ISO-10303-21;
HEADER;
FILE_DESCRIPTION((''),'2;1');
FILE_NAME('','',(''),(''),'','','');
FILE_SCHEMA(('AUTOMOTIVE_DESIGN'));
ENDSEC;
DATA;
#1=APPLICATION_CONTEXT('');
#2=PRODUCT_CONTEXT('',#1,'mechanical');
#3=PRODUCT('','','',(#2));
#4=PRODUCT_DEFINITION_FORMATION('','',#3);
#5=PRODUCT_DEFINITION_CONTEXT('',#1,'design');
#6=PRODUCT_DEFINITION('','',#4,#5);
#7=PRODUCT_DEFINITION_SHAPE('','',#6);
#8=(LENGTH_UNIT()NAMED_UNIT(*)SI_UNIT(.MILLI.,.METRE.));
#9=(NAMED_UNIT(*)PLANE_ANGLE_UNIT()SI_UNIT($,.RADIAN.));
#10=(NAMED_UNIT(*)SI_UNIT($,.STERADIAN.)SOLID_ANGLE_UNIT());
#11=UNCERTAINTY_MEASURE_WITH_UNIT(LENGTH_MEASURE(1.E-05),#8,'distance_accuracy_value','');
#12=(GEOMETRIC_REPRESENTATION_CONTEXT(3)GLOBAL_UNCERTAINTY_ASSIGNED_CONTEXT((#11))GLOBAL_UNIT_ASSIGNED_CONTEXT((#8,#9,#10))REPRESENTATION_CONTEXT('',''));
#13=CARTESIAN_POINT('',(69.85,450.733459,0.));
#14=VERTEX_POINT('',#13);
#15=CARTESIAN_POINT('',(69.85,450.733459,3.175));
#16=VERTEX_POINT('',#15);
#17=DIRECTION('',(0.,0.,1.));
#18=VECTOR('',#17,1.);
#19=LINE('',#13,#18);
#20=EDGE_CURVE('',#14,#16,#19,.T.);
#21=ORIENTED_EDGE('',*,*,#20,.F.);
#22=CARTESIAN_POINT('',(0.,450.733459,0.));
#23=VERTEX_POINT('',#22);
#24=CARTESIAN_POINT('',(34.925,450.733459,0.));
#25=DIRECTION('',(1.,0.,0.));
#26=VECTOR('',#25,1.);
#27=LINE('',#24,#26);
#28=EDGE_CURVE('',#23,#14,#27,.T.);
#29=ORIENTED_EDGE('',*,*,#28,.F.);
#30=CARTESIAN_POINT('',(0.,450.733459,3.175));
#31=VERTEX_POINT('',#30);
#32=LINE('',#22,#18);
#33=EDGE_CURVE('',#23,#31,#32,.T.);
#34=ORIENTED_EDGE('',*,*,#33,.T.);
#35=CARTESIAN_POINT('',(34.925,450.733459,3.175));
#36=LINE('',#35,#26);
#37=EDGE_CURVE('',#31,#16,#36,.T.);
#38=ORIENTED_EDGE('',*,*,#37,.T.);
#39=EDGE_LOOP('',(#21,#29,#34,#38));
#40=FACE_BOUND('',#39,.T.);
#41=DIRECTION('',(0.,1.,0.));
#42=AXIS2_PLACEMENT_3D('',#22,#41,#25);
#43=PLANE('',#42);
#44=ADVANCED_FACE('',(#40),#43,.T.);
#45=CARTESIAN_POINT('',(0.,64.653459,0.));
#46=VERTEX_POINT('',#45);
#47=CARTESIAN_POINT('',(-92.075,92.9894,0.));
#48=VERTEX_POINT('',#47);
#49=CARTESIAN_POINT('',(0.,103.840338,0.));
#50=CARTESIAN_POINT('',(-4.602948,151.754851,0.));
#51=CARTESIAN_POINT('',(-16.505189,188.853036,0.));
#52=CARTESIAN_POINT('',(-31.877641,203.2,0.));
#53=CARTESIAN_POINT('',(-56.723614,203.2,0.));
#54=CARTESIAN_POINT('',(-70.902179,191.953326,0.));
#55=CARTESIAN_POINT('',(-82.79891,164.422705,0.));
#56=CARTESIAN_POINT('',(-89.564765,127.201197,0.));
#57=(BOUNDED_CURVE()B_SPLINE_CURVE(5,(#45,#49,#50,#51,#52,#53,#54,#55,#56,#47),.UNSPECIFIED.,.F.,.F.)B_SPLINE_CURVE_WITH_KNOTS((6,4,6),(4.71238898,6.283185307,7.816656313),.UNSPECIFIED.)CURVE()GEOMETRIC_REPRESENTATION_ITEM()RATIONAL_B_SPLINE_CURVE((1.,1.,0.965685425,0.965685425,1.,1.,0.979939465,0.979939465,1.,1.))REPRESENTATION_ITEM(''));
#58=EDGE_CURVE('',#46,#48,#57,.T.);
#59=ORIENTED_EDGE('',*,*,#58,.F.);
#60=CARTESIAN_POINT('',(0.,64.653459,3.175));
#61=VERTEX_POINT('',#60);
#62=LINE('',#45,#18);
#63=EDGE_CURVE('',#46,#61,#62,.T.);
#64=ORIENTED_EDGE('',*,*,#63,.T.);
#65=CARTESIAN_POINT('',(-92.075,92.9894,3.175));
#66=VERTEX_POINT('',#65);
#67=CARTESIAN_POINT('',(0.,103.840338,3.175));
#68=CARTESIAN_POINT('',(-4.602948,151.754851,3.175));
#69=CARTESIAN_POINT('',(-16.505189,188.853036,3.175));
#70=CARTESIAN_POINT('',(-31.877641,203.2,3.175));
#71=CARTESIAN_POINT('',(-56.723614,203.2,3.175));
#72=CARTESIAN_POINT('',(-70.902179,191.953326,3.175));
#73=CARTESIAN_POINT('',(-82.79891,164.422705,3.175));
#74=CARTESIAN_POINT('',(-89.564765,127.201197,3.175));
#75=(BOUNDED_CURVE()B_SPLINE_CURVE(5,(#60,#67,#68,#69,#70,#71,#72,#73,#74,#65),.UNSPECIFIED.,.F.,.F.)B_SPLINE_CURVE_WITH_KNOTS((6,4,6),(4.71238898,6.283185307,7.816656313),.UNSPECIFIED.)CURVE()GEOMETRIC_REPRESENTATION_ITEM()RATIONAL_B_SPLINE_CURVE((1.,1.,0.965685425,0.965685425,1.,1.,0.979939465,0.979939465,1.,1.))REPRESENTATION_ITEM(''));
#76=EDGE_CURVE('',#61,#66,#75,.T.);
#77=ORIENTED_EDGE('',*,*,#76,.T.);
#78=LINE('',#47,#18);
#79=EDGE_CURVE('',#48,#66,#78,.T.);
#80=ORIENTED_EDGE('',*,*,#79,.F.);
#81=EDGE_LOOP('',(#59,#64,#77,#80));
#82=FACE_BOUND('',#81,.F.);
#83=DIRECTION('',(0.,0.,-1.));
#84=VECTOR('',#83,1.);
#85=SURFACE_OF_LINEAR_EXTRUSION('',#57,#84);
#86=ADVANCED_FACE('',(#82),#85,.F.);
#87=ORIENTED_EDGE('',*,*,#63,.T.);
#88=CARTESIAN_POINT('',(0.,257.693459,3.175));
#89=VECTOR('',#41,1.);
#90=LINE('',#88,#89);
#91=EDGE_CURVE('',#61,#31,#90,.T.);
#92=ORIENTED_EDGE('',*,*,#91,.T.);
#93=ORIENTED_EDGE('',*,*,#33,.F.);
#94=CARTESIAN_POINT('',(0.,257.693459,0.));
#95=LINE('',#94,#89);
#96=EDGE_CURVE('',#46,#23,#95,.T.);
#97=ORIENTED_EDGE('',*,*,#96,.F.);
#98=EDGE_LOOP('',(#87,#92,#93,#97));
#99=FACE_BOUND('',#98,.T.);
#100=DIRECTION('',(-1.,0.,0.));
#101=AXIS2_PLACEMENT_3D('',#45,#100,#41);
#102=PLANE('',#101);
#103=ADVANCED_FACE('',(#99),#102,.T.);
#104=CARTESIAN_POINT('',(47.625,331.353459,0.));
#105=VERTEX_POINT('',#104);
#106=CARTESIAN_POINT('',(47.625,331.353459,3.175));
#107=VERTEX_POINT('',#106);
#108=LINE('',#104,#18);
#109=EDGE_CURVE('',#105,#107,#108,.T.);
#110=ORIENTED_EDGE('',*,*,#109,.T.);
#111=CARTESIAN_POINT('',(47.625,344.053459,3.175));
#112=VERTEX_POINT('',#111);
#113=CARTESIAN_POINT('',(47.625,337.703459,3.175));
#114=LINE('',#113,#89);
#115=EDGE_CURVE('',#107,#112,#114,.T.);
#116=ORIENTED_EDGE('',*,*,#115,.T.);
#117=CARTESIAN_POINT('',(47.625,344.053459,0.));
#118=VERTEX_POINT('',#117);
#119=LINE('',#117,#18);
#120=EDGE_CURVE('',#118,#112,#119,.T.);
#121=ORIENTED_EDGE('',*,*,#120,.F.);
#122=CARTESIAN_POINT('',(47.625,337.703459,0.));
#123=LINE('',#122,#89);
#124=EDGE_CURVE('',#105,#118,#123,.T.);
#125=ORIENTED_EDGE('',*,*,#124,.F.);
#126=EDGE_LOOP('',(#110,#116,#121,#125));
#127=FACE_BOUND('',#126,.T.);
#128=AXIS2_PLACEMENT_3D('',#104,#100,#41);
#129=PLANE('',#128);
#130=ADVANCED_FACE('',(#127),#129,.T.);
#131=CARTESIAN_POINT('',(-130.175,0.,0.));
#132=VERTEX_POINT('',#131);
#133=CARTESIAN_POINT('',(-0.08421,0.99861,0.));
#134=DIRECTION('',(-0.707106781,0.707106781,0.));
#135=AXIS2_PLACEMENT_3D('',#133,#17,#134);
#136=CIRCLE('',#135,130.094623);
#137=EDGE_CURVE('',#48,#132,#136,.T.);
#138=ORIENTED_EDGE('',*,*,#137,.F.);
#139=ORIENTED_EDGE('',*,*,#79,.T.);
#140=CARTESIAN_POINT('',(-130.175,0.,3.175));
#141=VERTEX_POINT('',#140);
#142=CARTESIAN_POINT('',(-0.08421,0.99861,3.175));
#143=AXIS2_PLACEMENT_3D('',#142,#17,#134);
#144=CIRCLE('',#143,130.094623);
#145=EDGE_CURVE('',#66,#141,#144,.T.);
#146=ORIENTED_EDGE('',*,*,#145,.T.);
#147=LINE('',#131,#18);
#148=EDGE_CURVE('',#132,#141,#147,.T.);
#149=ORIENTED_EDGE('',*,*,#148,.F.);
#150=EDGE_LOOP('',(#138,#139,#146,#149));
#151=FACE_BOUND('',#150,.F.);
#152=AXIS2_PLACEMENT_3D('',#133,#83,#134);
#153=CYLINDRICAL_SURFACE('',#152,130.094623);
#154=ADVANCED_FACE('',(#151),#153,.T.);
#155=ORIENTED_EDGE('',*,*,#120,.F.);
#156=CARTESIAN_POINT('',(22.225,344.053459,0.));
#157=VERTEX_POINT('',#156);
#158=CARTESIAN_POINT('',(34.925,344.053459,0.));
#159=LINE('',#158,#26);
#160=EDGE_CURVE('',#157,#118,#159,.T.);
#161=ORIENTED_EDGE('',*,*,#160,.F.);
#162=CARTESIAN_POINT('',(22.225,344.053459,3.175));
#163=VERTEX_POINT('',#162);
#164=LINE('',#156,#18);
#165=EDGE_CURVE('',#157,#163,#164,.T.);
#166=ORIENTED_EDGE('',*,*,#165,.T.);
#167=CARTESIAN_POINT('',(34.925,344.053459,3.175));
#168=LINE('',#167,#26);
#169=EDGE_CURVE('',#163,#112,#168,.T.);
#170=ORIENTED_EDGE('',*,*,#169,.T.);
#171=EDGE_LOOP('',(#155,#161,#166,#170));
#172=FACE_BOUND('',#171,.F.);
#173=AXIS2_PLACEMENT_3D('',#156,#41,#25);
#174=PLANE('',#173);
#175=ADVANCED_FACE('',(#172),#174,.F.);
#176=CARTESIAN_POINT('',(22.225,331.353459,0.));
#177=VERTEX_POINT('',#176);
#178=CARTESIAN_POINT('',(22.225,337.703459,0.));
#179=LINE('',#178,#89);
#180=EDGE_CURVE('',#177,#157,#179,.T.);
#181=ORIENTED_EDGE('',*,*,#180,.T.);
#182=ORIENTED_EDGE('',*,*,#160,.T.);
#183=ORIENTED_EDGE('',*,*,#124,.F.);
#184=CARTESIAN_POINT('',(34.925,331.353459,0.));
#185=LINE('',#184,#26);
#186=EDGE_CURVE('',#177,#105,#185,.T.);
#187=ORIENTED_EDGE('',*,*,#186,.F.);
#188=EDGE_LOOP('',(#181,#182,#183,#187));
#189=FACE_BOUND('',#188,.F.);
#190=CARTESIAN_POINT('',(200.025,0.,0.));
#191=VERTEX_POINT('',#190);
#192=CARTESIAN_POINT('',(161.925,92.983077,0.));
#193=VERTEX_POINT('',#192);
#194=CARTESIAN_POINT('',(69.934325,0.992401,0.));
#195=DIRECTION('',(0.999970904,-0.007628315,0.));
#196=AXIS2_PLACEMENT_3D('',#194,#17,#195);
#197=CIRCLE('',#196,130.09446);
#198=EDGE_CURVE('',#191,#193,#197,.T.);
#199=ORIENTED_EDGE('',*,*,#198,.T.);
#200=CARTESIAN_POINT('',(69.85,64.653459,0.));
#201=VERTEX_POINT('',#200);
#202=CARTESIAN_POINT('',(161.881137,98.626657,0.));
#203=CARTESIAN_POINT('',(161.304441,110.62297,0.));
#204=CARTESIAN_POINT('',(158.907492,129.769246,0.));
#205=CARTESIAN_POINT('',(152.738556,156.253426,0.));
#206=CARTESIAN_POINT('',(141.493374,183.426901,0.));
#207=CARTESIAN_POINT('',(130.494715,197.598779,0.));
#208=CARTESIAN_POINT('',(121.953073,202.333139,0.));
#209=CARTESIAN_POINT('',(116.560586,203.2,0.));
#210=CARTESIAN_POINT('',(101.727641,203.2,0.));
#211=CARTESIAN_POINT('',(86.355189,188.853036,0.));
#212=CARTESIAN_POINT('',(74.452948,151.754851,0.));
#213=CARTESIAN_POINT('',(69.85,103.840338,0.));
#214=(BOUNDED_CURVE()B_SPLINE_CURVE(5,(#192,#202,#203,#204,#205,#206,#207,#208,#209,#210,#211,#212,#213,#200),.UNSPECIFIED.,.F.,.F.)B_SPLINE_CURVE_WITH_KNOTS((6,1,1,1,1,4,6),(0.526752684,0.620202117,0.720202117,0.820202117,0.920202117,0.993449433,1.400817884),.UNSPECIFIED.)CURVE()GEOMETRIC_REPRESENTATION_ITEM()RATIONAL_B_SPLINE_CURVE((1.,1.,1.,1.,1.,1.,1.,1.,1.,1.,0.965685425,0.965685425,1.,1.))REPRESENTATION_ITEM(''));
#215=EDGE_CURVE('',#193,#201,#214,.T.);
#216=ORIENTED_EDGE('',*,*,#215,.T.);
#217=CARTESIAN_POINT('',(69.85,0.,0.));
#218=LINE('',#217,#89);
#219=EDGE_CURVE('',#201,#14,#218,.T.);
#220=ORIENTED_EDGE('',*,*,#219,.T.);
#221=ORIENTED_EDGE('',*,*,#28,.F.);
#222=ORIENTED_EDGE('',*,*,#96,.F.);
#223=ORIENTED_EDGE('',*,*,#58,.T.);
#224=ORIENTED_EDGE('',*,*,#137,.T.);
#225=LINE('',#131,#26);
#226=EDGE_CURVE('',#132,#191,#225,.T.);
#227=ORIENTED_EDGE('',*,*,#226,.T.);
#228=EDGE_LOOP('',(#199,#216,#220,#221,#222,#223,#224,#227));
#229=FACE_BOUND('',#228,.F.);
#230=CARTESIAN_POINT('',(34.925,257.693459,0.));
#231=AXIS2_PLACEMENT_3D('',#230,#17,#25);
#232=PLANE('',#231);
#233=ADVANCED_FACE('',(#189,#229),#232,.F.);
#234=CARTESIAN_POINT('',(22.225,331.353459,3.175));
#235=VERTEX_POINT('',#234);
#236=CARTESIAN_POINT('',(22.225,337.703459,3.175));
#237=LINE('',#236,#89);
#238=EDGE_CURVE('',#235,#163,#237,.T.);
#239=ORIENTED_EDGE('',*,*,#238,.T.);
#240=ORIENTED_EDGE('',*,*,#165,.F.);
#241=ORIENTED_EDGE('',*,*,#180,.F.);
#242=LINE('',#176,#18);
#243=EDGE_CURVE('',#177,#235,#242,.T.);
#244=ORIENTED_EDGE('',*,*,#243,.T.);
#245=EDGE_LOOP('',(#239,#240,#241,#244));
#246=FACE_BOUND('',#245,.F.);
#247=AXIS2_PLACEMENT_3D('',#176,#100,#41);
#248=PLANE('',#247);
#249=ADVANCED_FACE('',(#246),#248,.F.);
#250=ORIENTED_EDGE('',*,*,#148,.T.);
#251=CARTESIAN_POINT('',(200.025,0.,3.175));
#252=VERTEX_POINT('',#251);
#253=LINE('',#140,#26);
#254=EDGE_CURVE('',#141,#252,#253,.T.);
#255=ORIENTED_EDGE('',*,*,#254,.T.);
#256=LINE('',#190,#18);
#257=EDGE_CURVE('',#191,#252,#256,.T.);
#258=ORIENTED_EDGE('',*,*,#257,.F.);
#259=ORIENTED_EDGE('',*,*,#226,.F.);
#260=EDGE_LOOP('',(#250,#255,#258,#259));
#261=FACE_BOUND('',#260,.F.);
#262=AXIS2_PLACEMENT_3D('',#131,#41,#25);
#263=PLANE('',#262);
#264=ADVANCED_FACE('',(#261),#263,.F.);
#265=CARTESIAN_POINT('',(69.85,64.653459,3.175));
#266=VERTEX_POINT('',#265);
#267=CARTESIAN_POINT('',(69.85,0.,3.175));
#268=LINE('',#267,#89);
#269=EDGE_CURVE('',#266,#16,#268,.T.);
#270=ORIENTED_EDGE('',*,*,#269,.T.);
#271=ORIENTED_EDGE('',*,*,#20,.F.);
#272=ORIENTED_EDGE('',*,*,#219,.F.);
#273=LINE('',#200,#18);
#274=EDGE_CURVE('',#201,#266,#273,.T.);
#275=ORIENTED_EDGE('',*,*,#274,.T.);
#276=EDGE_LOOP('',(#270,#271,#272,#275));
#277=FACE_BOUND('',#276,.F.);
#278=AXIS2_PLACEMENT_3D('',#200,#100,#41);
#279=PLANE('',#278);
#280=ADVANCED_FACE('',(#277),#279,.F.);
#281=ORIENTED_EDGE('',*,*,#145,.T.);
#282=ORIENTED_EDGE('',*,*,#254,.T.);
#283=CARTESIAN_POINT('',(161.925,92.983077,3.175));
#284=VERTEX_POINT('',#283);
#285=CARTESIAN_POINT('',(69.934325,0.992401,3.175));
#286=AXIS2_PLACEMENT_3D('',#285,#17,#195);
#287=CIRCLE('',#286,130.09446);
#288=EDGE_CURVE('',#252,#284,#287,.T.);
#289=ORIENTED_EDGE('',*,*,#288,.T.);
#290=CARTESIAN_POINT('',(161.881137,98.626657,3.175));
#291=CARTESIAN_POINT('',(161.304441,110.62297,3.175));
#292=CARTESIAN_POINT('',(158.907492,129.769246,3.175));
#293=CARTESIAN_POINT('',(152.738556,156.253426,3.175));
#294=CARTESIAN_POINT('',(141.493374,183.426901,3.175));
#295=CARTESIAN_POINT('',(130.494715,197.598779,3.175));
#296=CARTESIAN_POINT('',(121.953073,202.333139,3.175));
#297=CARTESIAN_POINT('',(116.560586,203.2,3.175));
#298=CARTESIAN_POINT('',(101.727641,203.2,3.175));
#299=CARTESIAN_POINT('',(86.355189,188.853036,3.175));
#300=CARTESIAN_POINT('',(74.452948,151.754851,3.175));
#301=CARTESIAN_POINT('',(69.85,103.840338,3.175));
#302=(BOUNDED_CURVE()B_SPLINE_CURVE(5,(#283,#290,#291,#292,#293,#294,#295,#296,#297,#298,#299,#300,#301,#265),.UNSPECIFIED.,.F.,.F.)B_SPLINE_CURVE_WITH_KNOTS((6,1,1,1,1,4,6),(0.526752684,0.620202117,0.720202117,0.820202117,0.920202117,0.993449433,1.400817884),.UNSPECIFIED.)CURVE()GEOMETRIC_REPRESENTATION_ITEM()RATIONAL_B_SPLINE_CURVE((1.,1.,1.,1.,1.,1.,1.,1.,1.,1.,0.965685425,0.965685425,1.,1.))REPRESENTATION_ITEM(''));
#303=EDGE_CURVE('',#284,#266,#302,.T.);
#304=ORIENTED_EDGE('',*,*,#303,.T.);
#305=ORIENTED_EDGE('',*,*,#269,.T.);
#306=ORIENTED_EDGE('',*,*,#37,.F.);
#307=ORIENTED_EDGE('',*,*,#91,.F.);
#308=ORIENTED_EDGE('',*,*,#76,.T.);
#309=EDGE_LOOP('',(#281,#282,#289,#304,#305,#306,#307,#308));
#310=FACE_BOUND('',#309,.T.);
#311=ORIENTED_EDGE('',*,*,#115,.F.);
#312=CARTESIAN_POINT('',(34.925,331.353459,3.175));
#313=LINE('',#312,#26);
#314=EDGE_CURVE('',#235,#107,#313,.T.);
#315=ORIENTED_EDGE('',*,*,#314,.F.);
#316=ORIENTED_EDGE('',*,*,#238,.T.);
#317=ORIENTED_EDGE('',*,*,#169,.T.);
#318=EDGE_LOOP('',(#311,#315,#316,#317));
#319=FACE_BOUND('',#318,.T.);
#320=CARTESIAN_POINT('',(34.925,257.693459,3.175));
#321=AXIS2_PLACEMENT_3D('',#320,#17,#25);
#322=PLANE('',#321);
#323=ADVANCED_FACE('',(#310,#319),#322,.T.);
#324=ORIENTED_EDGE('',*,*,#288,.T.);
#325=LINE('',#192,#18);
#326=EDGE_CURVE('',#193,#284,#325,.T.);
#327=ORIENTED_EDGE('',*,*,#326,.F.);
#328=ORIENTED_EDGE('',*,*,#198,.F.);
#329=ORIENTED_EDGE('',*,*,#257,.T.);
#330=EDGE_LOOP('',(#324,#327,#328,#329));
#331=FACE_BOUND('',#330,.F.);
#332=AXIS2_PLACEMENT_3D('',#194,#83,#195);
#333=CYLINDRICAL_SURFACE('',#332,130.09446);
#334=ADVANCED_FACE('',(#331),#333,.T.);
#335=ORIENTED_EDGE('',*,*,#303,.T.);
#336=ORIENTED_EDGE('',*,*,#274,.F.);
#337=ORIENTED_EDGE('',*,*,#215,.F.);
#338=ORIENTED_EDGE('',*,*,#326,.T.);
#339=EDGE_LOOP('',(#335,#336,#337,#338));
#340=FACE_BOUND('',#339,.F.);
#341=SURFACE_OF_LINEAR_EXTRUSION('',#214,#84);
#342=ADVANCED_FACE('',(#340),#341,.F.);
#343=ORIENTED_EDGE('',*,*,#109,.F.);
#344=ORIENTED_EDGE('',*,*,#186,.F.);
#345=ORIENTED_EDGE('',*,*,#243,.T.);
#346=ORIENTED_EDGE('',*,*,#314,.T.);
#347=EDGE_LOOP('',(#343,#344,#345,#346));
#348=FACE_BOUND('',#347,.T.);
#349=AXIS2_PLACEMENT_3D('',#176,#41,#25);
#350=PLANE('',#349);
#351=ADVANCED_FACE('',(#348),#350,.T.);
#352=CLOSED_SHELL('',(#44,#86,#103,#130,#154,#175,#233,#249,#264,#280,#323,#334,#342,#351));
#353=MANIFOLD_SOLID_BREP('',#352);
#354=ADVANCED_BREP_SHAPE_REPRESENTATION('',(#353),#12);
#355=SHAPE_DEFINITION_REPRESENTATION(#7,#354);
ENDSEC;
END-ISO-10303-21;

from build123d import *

# Parameters (mm, degrees)
F0_W     = 69.85
F0_H     = 386.08
F0_W_2   = 25.4
F0_H_2   = 12.7
F0_H_3   = 64.6534590532
F1_DEPTH = 3.175


# Not quite as in the source:
# - the dataset's text gives a spline's control points without its knots; the knots are read off the source's solid


with BuildPart() as f1:
    # F0 (on Top) → F1 (new body)
    with BuildSketch(Plane.XY):
        with Locations((34.925, 257.6934590532)):
            Rectangle(F0_W, F0_H)
        with Locations((34.925, 337.7034590532)):
            Rectangle(F0_W_2, F0_H_2, mode=Mode.SUBTRACT)
        with BuildLine():
            Line((0, 0), (0, 64.6534590532))
            add(Edge.make_bspline(
                [(0, 64.6534590532), (0, 203.2), (-44.45, 203.2)],
                knots=[4.7123889804, 4.7123889804, 4.7123889804, 6.2831853072, 6.2831853072, 6.2831853072], degree=2, weights=[1, 0.7071067812, 1]))
            add(Edge.make_bspline(
                [(-44.45, 203.2), (-83.9884760445, 203.2), (-92.075, 92.9894)],
                knots=[0, 0, 0, 1.3648200427, 1.3648200427, 1.3648200427], degree=2, weights=[1, 0.7760550574, 1]))
            ThreePointArc((-92.075, 92.9894), (-120.4661612059, 50.3219990464), (-130.175, 0))
            Line((-130.175, 0), (0, 0))
        make_face()
        with Locations((34.925, 32.3267295266)):
            Rectangle(F0_W, F0_H_3)
        with BuildLine():
            add(Edge.make_bspline(
                [(114.3, 203.2), (116.5605862503, 203.2), (121.9530728583, 202.3331388879), (130.4947147155, 197.5987791483), (141.4933741705, 183.4269013443), (152.7385562531, 156.2534255189), (158.9074917941, 129.7692462355), (161.3044412153, 110.6229696373), (161.8811367628, 98.626656943), (161.925, 92.9830765781)],
                knots=[0.5267526841, 0.5267526841, 0.5267526841, 0.5267526841, 0.5267526841, 0.5267526841, 0.6, 0.7, 0.8, 0.9, 0.9934494331, 0.9934494331, 0.9934494331, 0.9934494331, 0.9934494331, 0.9934494331], degree=5))
            add(Edge.make_bspline(
                [(114.3, 203.2), (69.85, 203.2), (69.85, 64.6534590532)],
                knots=[0, 0, 0, 1.5707963268, 1.5707963268, 1.5707963268], degree=2, weights=[1, 0.7071067812, 1]))
            Line((69.85, 64.6534590532), (69.85, 0))
            Line((69.85, 0), (200.025, 0))
            ThreePointArc((200.025, 0), (190.3149490033, 50.3186009129), (161.925, 92.9830765781))
        make_face()
    extrude(amount=F1_DEPTH)


solid = f1.part
